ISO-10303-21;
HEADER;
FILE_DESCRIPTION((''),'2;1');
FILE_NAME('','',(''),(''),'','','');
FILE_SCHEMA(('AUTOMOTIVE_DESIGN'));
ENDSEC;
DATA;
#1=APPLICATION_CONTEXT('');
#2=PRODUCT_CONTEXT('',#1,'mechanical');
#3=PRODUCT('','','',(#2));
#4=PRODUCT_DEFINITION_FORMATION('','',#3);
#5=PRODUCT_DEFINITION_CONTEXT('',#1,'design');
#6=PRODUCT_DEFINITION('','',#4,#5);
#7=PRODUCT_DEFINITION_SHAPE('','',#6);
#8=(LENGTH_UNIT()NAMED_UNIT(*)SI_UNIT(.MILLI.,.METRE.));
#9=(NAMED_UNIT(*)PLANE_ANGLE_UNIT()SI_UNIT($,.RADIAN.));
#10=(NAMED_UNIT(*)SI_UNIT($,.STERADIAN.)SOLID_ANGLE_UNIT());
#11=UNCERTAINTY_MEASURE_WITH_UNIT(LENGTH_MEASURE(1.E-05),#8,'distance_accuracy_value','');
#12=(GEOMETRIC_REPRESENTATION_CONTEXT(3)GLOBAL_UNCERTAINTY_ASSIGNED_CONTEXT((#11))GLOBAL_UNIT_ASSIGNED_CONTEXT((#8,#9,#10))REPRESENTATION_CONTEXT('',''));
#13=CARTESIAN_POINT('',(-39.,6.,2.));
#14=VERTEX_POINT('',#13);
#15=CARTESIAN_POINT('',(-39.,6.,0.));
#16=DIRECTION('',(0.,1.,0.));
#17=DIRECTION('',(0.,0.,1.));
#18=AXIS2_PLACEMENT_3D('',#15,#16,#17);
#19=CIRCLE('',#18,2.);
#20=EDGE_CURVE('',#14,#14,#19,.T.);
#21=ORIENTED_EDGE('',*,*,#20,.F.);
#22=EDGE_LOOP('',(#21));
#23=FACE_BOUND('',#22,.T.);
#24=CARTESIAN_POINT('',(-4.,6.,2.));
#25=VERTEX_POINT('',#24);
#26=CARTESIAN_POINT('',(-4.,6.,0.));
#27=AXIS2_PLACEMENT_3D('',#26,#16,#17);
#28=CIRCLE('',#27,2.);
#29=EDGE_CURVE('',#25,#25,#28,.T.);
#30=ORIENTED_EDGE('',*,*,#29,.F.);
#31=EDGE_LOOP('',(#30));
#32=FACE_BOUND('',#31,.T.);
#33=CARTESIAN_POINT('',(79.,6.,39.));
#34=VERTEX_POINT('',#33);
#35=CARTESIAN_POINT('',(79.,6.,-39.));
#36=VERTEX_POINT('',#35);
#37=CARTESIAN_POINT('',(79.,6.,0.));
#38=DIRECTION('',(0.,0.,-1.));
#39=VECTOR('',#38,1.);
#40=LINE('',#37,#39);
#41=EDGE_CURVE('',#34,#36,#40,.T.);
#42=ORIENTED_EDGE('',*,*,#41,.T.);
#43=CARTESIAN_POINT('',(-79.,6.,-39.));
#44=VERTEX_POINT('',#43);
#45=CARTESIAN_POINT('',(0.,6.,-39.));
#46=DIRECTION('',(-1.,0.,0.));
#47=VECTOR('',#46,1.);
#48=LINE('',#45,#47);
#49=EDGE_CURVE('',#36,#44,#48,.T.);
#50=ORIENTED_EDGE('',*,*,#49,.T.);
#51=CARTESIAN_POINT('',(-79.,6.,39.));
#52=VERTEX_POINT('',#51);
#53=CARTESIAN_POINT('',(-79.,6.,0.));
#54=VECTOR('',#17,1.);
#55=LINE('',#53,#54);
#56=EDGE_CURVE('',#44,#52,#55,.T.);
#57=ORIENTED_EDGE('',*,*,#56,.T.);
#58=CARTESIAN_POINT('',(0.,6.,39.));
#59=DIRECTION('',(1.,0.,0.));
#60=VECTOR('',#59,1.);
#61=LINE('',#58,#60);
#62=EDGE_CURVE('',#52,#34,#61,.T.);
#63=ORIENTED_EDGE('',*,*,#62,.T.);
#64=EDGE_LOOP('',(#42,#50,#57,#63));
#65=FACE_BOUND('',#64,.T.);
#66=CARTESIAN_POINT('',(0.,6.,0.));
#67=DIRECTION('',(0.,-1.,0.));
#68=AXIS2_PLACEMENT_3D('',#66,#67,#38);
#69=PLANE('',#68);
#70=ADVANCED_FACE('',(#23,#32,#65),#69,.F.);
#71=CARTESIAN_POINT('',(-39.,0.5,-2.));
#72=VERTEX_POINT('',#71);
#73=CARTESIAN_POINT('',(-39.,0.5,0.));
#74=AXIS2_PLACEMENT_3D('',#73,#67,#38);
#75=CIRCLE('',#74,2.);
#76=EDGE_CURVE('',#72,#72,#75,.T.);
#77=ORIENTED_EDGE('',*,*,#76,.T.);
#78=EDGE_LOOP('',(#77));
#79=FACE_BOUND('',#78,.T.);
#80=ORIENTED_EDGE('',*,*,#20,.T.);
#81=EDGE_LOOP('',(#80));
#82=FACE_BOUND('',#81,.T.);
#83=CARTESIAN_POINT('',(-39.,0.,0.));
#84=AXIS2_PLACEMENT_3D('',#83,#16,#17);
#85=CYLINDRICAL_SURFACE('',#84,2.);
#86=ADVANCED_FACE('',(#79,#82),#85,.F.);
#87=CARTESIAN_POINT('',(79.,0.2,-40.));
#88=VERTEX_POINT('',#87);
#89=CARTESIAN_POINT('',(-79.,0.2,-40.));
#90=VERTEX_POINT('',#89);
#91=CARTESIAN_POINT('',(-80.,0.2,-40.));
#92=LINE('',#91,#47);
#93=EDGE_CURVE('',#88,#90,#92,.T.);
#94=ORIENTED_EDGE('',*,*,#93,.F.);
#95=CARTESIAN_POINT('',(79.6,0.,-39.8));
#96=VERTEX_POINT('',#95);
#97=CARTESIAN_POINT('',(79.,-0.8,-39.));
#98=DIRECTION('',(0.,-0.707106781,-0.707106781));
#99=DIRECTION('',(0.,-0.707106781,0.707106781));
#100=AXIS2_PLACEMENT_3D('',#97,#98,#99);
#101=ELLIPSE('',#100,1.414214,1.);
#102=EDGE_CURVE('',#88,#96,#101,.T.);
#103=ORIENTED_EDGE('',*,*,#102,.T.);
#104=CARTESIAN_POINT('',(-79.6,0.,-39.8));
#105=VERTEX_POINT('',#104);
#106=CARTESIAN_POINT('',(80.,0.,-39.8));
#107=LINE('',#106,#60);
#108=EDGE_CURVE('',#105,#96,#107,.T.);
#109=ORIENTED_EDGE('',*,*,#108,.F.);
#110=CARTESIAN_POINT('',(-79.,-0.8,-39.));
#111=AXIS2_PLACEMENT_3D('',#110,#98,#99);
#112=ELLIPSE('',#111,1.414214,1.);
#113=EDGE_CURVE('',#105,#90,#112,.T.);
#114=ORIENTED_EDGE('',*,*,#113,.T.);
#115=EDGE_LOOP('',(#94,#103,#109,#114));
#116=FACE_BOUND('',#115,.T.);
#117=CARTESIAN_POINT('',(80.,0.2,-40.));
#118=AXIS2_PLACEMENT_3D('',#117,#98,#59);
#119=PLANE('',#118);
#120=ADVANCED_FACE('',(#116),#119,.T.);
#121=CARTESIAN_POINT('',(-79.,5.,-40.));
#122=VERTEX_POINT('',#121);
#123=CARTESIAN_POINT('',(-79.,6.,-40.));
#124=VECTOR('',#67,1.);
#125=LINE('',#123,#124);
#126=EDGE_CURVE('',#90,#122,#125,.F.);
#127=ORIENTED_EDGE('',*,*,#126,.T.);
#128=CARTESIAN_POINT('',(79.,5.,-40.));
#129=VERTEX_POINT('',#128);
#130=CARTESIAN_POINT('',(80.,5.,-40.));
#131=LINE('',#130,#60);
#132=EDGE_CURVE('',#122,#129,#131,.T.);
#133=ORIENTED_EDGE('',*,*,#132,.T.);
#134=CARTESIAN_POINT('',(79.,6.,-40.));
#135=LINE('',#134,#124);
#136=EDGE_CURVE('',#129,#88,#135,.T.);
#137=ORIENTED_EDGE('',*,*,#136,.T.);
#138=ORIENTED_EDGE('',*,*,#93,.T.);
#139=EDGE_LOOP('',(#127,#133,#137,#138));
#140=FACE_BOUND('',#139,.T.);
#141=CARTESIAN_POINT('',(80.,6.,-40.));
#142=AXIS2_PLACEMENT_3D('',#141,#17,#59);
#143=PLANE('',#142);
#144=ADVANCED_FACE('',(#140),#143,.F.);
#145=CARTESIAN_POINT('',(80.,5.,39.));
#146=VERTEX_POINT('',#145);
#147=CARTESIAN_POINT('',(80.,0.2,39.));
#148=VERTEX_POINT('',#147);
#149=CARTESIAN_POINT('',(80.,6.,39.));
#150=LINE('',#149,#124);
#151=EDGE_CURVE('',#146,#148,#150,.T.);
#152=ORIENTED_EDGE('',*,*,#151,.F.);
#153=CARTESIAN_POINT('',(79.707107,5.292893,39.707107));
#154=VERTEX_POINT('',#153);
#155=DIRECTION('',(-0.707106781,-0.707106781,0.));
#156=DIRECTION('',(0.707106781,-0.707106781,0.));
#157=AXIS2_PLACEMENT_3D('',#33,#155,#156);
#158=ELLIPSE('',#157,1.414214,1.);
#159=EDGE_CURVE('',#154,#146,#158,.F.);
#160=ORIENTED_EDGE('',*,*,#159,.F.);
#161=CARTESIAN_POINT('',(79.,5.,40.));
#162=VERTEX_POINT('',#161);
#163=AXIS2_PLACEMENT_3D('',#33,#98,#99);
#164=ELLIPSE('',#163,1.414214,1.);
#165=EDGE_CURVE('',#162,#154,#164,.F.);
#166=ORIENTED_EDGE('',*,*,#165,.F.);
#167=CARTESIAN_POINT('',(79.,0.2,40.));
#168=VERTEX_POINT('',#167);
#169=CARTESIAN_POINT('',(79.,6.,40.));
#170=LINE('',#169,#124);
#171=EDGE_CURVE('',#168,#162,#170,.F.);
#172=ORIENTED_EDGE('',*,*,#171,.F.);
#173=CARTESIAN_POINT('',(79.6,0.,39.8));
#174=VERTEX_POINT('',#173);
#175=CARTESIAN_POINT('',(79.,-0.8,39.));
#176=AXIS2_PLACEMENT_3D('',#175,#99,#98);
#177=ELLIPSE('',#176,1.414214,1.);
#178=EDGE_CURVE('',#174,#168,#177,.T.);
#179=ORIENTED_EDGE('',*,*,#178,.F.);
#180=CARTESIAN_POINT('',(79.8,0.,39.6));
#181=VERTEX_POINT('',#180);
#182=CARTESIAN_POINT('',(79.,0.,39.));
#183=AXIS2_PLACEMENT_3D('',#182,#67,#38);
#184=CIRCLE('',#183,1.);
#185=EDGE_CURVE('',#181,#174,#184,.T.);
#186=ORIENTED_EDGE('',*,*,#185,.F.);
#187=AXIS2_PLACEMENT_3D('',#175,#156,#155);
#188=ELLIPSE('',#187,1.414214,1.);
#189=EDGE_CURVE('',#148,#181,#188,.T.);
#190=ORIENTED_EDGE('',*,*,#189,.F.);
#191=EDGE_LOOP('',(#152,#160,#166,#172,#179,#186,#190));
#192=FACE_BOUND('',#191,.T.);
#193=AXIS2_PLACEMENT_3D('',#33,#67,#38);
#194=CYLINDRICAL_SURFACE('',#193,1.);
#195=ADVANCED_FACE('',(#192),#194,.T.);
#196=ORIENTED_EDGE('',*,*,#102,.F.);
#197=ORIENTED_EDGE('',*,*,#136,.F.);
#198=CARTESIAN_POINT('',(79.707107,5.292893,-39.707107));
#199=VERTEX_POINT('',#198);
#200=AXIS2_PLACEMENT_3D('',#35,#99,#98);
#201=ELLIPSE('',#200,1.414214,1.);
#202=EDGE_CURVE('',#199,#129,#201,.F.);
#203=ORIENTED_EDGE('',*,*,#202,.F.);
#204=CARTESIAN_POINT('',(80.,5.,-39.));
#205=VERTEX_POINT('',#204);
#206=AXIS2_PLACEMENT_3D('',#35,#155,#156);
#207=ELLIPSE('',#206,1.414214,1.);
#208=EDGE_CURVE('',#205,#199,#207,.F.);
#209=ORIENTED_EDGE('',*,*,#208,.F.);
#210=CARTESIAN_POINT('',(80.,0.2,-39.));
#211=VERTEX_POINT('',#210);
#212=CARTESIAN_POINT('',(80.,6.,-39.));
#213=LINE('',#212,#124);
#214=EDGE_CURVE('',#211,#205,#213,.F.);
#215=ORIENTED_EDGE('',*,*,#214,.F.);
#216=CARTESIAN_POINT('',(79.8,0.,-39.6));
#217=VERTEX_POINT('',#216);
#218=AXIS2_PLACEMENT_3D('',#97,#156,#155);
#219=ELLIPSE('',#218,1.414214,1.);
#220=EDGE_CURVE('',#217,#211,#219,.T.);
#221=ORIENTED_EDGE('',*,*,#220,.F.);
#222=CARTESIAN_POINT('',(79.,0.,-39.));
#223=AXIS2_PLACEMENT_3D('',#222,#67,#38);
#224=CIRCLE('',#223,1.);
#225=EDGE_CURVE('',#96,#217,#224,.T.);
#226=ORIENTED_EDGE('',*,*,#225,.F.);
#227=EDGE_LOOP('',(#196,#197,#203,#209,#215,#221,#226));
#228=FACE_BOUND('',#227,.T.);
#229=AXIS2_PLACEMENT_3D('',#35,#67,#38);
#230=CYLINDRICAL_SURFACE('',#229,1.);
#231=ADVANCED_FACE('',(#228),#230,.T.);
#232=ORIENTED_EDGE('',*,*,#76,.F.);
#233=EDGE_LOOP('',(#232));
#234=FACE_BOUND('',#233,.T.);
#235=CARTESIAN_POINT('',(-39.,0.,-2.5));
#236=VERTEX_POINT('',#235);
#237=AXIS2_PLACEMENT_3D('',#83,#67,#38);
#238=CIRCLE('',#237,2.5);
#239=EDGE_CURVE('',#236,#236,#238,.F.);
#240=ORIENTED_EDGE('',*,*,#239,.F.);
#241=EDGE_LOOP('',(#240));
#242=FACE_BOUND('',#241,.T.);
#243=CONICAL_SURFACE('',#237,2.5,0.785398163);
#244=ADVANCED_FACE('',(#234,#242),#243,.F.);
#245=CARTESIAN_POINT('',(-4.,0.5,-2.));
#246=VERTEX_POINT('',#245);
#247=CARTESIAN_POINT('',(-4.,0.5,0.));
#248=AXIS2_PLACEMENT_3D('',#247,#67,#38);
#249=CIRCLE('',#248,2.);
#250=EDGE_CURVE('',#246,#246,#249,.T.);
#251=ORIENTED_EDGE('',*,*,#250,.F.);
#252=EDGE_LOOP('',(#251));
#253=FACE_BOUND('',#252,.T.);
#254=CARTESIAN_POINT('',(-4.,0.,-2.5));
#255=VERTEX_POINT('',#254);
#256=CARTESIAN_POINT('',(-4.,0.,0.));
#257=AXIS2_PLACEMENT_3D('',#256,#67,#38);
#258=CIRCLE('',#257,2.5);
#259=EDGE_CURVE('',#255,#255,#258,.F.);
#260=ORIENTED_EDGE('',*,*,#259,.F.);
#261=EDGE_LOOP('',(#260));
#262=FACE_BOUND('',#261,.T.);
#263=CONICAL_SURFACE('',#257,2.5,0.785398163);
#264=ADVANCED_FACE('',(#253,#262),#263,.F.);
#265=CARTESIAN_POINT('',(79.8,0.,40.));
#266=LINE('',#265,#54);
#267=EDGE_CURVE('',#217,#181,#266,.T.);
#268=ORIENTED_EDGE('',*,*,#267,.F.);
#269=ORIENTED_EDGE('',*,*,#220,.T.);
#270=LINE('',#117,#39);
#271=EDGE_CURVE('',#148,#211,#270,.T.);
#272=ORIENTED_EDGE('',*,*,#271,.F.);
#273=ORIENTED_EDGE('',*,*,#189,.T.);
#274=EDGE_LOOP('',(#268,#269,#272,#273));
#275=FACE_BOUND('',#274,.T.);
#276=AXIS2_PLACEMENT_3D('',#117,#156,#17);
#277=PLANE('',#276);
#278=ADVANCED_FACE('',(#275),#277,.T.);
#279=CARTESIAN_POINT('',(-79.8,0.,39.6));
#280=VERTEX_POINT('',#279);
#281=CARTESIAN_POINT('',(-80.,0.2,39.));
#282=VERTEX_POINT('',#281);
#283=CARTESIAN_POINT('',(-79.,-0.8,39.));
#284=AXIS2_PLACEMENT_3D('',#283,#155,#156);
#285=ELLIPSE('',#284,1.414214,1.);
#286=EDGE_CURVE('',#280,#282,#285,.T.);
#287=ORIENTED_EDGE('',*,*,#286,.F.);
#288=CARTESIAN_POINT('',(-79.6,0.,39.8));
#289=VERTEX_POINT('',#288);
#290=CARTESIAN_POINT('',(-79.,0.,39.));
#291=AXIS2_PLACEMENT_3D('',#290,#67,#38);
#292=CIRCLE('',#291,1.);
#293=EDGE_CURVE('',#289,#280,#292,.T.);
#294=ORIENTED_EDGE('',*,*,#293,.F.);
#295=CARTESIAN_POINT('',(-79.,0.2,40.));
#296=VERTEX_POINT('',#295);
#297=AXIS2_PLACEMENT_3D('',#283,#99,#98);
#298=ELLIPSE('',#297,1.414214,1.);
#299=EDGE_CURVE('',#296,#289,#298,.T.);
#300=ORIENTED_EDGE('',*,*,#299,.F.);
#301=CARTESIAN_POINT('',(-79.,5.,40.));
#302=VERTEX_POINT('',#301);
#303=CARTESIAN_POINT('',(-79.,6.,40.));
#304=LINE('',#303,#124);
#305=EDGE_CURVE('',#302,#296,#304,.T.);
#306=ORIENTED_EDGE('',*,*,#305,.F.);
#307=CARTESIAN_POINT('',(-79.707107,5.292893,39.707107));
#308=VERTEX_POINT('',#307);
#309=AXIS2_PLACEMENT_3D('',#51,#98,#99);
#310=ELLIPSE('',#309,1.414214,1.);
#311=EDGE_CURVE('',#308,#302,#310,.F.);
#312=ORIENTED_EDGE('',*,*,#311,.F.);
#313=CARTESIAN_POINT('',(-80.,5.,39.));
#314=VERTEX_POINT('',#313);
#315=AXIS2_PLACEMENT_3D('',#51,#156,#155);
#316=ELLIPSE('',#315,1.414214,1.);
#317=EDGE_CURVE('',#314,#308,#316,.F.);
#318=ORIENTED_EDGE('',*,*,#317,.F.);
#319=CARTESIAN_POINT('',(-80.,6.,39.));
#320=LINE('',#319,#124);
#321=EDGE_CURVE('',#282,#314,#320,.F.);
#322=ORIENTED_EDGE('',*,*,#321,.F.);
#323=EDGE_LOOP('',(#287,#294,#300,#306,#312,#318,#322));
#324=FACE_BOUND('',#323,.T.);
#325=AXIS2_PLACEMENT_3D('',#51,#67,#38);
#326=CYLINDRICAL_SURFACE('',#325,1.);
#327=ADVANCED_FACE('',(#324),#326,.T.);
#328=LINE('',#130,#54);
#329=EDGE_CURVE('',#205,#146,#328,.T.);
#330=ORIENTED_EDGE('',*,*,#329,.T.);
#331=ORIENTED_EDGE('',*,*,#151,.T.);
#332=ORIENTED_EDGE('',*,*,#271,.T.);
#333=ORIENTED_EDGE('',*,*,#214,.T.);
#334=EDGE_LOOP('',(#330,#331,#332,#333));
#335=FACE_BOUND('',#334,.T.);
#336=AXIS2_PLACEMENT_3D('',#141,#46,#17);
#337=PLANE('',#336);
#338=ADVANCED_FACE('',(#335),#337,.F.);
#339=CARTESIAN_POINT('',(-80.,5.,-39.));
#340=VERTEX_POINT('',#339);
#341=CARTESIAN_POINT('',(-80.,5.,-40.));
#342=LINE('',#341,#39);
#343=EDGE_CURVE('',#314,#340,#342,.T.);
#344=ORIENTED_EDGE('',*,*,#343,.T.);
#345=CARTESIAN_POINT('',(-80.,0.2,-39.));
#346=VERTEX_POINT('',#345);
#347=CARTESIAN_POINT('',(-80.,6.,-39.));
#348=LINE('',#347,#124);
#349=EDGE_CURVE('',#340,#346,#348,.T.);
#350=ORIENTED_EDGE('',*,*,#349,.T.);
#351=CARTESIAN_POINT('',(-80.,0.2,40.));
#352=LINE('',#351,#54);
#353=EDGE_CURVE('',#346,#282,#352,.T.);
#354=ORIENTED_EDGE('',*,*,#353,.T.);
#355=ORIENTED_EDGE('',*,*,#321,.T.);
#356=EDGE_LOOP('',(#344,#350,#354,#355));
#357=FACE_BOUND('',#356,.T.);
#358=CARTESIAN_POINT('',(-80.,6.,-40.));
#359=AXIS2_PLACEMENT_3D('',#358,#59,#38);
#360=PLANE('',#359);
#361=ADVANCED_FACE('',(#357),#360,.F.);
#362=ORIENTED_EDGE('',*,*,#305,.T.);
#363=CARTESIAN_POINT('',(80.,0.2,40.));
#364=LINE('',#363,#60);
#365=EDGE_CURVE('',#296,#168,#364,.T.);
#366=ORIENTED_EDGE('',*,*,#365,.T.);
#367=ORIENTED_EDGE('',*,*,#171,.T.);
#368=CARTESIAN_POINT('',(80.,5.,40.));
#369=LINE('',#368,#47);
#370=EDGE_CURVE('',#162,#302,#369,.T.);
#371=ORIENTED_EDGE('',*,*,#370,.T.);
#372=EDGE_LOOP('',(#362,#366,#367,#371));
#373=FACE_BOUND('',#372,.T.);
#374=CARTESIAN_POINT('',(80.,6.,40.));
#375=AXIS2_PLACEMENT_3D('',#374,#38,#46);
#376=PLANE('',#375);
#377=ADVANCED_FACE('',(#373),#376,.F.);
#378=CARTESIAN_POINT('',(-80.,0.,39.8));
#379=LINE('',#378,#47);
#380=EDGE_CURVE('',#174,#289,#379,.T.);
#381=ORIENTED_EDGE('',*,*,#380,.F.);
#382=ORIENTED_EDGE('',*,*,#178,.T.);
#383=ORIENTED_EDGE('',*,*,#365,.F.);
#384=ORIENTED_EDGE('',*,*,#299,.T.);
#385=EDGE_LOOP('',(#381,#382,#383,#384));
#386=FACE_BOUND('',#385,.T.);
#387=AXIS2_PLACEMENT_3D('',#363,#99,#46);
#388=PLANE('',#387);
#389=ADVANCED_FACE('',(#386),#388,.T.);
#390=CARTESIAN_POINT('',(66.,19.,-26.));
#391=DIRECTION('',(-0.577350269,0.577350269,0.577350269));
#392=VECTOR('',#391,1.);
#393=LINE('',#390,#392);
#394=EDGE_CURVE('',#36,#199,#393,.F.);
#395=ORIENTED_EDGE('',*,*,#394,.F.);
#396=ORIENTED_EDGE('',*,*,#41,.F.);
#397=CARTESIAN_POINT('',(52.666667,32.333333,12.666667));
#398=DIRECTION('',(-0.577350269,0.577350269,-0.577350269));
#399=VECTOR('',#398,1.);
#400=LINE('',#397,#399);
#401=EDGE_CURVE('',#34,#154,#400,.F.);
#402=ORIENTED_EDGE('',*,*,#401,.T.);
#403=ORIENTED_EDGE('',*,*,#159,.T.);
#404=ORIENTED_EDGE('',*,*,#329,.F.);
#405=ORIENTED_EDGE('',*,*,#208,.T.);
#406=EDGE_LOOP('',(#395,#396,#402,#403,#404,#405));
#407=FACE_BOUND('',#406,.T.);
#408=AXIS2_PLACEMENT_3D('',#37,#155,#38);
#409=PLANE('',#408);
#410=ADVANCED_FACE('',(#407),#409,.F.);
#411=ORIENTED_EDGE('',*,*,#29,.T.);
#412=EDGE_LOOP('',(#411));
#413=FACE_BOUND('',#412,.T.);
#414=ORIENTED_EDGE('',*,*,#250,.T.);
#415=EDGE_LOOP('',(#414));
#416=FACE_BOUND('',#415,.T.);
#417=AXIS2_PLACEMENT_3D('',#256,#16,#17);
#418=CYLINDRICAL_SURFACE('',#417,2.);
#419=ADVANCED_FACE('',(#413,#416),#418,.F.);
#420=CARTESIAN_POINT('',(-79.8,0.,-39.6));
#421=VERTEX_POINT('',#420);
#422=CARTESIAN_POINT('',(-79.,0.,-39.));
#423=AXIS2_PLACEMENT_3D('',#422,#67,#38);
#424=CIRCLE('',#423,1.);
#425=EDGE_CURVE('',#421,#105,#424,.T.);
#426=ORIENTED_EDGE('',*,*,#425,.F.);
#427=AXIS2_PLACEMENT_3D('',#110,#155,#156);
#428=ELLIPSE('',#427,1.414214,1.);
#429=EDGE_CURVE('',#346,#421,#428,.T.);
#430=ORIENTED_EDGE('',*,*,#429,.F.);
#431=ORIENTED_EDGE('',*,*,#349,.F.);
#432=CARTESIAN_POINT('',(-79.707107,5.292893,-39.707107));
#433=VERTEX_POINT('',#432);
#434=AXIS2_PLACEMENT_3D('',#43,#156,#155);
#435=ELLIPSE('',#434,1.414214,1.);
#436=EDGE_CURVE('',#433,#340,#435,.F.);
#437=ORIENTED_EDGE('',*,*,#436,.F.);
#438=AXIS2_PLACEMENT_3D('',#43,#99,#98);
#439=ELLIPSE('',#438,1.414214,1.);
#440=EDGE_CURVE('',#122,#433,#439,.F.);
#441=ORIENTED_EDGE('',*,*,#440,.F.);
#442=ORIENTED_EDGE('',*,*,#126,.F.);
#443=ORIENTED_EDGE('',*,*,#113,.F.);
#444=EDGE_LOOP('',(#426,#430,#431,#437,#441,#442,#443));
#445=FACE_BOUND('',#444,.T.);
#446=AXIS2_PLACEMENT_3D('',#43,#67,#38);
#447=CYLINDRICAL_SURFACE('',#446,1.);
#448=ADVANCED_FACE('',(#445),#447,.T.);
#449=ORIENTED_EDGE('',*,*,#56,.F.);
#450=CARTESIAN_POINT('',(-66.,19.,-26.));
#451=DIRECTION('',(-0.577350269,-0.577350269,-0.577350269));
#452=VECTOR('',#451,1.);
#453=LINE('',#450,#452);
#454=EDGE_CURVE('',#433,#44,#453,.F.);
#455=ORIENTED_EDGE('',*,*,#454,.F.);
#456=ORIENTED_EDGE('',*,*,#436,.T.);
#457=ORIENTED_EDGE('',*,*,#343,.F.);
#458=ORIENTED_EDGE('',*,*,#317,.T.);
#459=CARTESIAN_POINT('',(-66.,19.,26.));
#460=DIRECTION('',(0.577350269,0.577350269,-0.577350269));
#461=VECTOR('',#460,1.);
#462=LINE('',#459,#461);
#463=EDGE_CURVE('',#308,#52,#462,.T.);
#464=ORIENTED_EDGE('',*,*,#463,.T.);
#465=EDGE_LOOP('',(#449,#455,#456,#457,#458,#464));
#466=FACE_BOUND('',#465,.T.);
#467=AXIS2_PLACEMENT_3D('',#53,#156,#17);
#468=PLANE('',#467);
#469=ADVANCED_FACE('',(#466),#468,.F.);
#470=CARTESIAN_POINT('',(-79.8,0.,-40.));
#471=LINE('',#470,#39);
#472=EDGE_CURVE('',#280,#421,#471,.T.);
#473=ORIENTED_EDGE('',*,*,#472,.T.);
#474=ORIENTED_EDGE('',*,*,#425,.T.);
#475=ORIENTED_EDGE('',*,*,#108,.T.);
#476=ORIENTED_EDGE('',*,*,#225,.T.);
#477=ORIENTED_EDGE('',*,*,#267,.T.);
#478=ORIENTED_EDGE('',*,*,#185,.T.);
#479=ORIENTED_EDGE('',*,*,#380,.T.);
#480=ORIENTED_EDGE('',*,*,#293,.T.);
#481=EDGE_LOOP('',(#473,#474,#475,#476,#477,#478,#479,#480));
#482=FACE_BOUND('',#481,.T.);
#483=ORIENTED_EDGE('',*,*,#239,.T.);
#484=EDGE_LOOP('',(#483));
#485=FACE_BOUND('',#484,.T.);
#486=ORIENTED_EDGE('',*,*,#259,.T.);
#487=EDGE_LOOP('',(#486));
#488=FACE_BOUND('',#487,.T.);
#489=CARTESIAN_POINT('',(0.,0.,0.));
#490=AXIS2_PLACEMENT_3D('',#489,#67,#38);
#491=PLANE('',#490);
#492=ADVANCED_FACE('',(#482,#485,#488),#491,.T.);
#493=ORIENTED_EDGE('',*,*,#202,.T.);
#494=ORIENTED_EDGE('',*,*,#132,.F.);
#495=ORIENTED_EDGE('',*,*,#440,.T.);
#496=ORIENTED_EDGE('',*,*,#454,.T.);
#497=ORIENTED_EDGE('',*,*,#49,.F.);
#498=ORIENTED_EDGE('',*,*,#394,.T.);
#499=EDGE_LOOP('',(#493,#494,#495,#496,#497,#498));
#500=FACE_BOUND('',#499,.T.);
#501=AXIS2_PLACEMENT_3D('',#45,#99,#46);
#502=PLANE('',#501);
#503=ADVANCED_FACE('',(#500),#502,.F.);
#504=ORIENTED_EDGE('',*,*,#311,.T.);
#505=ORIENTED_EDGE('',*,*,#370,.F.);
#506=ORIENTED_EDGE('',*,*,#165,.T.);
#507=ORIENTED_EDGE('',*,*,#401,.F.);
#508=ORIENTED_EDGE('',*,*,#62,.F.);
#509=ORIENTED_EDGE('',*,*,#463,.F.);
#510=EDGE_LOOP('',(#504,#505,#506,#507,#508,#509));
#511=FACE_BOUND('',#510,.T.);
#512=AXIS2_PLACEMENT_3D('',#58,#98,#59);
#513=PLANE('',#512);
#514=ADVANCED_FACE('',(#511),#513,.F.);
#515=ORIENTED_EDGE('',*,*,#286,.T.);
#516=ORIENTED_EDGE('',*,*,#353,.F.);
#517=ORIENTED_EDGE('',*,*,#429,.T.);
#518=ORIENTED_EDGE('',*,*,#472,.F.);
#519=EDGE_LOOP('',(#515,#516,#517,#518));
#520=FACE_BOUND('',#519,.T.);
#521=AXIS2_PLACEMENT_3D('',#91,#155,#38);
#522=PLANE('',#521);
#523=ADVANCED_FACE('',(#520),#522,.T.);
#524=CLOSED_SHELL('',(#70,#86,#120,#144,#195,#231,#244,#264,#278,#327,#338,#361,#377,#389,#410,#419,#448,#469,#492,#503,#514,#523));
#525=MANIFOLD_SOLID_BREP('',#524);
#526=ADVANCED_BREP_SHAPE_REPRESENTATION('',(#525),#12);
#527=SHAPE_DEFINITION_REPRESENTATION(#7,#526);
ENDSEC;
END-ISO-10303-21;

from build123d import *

# Parameters (mm, degrees)
SKETCH_1_W          = 160
SKETCH_1_H          = 80
EXTRUDE_1_DEPTH     = 6
CHAMFER_1_SIZE      = 1
CHAMFER_2_SIZE      = 0.2
SKETCH_3_R          = 2
CUT_EXTRUDE_2_DEPTH = 90.643739324
CHAMFER_4_SIZE      = 0.5
FILLET_1_R          = 1


with BuildPart() as part:
    # 草图1 → 凸台-拉伸1 (new body)
    with BuildSketch(Plane(origin=(0, 0, 0), x_dir=(1, 0, 0), z_dir=(0, 1, 0))):
        Rectangle(SKETCH_1_W, SKETCH_1_H)
    extrude(amount=EXTRUDE_1_DEPTH)

    # 倒角1
    chamfer_1_edges = [part.edges().sort_by_distance(p)[0] for p in [
        (80, 6, 0),
        (0, 6, -40),
        (-80, 6, 0),
        (0, 6, 40),
    ]]
    chamfer(chamfer_1_edges, length=CHAMFER_1_SIZE)

    # 倒角2
    chamfer_2_edges = [part.edges().sort_by_distance(p)[0] for p in [
        (0, 0, -40),
        (80, 0, 0),
        (0, 0, 40),
        (-80, 0, 0),
    ]]
    chamfer(chamfer_2_edges, length=CHAMFER_2_SIZE)

    # 草图3 → 切除-拉伸2 (cut, through all)
    with BuildSketch(Plane(origin=(0, 6, 0), x_dir=(1, 0, 0), z_dir=(0, 1, 0))):
        with Locations(Location((-39, 0, 0), (0, 0, 270))):
            Circle(SKETCH_3_R)
        with Locations(Location((-4, 0, 0), (0, 0, 270))):
            Circle(SKETCH_3_R)
    extrude(amount=-CUT_EXTRUDE_2_DEPTH, mode=Mode.SUBTRACT)

    # 倒角4
    chamfer_4_edges = [part.edges().sort_by_distance(p)[0] for p in [
        (-39, 0, -2),
        (-4, 0, -2),
    ]]
    chamfer(chamfer_4_edges, length=CHAMFER_4_SIZE)

    # 圆角1
    # the kernel refuses this fillet: 1 mm, written as the material it takes off along each edge
    with BuildSketch(Plane(origin=(-80, -2.3, -40), x_dir=(1, 0, 0), z_dir=(0, 1, 0)), Plane(origin=(-80, -2.3, 40), x_dir=(0, 0, -1), z_dir=(0, 1, 0))) as fillet_1_piece_1:
        with BuildLine():
            CenterArc((FILLET_1_R, -FILLET_1_R), FILLET_1_R, 90, 90)
            Line((0, -FILLET_1_R), (0, 0))
            Line((0, 0), (FILLET_1_R, 0))
        make_face()
    extrude(amount=9.8, mode=Mode.SUBTRACT)
    with BuildSketch(Plane(origin=(80, -2.3, -40), x_dir=(-1, 0, 0), z_dir=(0, 1, 0)), Plane(origin=(80, -2.3, 40), x_dir=(0, 0, -1), z_dir=(0, 1, 0))) as fillet_1_piece_2:
        with BuildLine():
            CenterArc((FILLET_1_R, FILLET_1_R), FILLET_1_R, 180, 90)
            Line((0, FILLET_1_R), (0, 0))
            Line((0, 0), (FILLET_1_R, 0))
        make_face()
    extrude(amount=9.8, mode=Mode.SUBTRACT)


solid = part.part
